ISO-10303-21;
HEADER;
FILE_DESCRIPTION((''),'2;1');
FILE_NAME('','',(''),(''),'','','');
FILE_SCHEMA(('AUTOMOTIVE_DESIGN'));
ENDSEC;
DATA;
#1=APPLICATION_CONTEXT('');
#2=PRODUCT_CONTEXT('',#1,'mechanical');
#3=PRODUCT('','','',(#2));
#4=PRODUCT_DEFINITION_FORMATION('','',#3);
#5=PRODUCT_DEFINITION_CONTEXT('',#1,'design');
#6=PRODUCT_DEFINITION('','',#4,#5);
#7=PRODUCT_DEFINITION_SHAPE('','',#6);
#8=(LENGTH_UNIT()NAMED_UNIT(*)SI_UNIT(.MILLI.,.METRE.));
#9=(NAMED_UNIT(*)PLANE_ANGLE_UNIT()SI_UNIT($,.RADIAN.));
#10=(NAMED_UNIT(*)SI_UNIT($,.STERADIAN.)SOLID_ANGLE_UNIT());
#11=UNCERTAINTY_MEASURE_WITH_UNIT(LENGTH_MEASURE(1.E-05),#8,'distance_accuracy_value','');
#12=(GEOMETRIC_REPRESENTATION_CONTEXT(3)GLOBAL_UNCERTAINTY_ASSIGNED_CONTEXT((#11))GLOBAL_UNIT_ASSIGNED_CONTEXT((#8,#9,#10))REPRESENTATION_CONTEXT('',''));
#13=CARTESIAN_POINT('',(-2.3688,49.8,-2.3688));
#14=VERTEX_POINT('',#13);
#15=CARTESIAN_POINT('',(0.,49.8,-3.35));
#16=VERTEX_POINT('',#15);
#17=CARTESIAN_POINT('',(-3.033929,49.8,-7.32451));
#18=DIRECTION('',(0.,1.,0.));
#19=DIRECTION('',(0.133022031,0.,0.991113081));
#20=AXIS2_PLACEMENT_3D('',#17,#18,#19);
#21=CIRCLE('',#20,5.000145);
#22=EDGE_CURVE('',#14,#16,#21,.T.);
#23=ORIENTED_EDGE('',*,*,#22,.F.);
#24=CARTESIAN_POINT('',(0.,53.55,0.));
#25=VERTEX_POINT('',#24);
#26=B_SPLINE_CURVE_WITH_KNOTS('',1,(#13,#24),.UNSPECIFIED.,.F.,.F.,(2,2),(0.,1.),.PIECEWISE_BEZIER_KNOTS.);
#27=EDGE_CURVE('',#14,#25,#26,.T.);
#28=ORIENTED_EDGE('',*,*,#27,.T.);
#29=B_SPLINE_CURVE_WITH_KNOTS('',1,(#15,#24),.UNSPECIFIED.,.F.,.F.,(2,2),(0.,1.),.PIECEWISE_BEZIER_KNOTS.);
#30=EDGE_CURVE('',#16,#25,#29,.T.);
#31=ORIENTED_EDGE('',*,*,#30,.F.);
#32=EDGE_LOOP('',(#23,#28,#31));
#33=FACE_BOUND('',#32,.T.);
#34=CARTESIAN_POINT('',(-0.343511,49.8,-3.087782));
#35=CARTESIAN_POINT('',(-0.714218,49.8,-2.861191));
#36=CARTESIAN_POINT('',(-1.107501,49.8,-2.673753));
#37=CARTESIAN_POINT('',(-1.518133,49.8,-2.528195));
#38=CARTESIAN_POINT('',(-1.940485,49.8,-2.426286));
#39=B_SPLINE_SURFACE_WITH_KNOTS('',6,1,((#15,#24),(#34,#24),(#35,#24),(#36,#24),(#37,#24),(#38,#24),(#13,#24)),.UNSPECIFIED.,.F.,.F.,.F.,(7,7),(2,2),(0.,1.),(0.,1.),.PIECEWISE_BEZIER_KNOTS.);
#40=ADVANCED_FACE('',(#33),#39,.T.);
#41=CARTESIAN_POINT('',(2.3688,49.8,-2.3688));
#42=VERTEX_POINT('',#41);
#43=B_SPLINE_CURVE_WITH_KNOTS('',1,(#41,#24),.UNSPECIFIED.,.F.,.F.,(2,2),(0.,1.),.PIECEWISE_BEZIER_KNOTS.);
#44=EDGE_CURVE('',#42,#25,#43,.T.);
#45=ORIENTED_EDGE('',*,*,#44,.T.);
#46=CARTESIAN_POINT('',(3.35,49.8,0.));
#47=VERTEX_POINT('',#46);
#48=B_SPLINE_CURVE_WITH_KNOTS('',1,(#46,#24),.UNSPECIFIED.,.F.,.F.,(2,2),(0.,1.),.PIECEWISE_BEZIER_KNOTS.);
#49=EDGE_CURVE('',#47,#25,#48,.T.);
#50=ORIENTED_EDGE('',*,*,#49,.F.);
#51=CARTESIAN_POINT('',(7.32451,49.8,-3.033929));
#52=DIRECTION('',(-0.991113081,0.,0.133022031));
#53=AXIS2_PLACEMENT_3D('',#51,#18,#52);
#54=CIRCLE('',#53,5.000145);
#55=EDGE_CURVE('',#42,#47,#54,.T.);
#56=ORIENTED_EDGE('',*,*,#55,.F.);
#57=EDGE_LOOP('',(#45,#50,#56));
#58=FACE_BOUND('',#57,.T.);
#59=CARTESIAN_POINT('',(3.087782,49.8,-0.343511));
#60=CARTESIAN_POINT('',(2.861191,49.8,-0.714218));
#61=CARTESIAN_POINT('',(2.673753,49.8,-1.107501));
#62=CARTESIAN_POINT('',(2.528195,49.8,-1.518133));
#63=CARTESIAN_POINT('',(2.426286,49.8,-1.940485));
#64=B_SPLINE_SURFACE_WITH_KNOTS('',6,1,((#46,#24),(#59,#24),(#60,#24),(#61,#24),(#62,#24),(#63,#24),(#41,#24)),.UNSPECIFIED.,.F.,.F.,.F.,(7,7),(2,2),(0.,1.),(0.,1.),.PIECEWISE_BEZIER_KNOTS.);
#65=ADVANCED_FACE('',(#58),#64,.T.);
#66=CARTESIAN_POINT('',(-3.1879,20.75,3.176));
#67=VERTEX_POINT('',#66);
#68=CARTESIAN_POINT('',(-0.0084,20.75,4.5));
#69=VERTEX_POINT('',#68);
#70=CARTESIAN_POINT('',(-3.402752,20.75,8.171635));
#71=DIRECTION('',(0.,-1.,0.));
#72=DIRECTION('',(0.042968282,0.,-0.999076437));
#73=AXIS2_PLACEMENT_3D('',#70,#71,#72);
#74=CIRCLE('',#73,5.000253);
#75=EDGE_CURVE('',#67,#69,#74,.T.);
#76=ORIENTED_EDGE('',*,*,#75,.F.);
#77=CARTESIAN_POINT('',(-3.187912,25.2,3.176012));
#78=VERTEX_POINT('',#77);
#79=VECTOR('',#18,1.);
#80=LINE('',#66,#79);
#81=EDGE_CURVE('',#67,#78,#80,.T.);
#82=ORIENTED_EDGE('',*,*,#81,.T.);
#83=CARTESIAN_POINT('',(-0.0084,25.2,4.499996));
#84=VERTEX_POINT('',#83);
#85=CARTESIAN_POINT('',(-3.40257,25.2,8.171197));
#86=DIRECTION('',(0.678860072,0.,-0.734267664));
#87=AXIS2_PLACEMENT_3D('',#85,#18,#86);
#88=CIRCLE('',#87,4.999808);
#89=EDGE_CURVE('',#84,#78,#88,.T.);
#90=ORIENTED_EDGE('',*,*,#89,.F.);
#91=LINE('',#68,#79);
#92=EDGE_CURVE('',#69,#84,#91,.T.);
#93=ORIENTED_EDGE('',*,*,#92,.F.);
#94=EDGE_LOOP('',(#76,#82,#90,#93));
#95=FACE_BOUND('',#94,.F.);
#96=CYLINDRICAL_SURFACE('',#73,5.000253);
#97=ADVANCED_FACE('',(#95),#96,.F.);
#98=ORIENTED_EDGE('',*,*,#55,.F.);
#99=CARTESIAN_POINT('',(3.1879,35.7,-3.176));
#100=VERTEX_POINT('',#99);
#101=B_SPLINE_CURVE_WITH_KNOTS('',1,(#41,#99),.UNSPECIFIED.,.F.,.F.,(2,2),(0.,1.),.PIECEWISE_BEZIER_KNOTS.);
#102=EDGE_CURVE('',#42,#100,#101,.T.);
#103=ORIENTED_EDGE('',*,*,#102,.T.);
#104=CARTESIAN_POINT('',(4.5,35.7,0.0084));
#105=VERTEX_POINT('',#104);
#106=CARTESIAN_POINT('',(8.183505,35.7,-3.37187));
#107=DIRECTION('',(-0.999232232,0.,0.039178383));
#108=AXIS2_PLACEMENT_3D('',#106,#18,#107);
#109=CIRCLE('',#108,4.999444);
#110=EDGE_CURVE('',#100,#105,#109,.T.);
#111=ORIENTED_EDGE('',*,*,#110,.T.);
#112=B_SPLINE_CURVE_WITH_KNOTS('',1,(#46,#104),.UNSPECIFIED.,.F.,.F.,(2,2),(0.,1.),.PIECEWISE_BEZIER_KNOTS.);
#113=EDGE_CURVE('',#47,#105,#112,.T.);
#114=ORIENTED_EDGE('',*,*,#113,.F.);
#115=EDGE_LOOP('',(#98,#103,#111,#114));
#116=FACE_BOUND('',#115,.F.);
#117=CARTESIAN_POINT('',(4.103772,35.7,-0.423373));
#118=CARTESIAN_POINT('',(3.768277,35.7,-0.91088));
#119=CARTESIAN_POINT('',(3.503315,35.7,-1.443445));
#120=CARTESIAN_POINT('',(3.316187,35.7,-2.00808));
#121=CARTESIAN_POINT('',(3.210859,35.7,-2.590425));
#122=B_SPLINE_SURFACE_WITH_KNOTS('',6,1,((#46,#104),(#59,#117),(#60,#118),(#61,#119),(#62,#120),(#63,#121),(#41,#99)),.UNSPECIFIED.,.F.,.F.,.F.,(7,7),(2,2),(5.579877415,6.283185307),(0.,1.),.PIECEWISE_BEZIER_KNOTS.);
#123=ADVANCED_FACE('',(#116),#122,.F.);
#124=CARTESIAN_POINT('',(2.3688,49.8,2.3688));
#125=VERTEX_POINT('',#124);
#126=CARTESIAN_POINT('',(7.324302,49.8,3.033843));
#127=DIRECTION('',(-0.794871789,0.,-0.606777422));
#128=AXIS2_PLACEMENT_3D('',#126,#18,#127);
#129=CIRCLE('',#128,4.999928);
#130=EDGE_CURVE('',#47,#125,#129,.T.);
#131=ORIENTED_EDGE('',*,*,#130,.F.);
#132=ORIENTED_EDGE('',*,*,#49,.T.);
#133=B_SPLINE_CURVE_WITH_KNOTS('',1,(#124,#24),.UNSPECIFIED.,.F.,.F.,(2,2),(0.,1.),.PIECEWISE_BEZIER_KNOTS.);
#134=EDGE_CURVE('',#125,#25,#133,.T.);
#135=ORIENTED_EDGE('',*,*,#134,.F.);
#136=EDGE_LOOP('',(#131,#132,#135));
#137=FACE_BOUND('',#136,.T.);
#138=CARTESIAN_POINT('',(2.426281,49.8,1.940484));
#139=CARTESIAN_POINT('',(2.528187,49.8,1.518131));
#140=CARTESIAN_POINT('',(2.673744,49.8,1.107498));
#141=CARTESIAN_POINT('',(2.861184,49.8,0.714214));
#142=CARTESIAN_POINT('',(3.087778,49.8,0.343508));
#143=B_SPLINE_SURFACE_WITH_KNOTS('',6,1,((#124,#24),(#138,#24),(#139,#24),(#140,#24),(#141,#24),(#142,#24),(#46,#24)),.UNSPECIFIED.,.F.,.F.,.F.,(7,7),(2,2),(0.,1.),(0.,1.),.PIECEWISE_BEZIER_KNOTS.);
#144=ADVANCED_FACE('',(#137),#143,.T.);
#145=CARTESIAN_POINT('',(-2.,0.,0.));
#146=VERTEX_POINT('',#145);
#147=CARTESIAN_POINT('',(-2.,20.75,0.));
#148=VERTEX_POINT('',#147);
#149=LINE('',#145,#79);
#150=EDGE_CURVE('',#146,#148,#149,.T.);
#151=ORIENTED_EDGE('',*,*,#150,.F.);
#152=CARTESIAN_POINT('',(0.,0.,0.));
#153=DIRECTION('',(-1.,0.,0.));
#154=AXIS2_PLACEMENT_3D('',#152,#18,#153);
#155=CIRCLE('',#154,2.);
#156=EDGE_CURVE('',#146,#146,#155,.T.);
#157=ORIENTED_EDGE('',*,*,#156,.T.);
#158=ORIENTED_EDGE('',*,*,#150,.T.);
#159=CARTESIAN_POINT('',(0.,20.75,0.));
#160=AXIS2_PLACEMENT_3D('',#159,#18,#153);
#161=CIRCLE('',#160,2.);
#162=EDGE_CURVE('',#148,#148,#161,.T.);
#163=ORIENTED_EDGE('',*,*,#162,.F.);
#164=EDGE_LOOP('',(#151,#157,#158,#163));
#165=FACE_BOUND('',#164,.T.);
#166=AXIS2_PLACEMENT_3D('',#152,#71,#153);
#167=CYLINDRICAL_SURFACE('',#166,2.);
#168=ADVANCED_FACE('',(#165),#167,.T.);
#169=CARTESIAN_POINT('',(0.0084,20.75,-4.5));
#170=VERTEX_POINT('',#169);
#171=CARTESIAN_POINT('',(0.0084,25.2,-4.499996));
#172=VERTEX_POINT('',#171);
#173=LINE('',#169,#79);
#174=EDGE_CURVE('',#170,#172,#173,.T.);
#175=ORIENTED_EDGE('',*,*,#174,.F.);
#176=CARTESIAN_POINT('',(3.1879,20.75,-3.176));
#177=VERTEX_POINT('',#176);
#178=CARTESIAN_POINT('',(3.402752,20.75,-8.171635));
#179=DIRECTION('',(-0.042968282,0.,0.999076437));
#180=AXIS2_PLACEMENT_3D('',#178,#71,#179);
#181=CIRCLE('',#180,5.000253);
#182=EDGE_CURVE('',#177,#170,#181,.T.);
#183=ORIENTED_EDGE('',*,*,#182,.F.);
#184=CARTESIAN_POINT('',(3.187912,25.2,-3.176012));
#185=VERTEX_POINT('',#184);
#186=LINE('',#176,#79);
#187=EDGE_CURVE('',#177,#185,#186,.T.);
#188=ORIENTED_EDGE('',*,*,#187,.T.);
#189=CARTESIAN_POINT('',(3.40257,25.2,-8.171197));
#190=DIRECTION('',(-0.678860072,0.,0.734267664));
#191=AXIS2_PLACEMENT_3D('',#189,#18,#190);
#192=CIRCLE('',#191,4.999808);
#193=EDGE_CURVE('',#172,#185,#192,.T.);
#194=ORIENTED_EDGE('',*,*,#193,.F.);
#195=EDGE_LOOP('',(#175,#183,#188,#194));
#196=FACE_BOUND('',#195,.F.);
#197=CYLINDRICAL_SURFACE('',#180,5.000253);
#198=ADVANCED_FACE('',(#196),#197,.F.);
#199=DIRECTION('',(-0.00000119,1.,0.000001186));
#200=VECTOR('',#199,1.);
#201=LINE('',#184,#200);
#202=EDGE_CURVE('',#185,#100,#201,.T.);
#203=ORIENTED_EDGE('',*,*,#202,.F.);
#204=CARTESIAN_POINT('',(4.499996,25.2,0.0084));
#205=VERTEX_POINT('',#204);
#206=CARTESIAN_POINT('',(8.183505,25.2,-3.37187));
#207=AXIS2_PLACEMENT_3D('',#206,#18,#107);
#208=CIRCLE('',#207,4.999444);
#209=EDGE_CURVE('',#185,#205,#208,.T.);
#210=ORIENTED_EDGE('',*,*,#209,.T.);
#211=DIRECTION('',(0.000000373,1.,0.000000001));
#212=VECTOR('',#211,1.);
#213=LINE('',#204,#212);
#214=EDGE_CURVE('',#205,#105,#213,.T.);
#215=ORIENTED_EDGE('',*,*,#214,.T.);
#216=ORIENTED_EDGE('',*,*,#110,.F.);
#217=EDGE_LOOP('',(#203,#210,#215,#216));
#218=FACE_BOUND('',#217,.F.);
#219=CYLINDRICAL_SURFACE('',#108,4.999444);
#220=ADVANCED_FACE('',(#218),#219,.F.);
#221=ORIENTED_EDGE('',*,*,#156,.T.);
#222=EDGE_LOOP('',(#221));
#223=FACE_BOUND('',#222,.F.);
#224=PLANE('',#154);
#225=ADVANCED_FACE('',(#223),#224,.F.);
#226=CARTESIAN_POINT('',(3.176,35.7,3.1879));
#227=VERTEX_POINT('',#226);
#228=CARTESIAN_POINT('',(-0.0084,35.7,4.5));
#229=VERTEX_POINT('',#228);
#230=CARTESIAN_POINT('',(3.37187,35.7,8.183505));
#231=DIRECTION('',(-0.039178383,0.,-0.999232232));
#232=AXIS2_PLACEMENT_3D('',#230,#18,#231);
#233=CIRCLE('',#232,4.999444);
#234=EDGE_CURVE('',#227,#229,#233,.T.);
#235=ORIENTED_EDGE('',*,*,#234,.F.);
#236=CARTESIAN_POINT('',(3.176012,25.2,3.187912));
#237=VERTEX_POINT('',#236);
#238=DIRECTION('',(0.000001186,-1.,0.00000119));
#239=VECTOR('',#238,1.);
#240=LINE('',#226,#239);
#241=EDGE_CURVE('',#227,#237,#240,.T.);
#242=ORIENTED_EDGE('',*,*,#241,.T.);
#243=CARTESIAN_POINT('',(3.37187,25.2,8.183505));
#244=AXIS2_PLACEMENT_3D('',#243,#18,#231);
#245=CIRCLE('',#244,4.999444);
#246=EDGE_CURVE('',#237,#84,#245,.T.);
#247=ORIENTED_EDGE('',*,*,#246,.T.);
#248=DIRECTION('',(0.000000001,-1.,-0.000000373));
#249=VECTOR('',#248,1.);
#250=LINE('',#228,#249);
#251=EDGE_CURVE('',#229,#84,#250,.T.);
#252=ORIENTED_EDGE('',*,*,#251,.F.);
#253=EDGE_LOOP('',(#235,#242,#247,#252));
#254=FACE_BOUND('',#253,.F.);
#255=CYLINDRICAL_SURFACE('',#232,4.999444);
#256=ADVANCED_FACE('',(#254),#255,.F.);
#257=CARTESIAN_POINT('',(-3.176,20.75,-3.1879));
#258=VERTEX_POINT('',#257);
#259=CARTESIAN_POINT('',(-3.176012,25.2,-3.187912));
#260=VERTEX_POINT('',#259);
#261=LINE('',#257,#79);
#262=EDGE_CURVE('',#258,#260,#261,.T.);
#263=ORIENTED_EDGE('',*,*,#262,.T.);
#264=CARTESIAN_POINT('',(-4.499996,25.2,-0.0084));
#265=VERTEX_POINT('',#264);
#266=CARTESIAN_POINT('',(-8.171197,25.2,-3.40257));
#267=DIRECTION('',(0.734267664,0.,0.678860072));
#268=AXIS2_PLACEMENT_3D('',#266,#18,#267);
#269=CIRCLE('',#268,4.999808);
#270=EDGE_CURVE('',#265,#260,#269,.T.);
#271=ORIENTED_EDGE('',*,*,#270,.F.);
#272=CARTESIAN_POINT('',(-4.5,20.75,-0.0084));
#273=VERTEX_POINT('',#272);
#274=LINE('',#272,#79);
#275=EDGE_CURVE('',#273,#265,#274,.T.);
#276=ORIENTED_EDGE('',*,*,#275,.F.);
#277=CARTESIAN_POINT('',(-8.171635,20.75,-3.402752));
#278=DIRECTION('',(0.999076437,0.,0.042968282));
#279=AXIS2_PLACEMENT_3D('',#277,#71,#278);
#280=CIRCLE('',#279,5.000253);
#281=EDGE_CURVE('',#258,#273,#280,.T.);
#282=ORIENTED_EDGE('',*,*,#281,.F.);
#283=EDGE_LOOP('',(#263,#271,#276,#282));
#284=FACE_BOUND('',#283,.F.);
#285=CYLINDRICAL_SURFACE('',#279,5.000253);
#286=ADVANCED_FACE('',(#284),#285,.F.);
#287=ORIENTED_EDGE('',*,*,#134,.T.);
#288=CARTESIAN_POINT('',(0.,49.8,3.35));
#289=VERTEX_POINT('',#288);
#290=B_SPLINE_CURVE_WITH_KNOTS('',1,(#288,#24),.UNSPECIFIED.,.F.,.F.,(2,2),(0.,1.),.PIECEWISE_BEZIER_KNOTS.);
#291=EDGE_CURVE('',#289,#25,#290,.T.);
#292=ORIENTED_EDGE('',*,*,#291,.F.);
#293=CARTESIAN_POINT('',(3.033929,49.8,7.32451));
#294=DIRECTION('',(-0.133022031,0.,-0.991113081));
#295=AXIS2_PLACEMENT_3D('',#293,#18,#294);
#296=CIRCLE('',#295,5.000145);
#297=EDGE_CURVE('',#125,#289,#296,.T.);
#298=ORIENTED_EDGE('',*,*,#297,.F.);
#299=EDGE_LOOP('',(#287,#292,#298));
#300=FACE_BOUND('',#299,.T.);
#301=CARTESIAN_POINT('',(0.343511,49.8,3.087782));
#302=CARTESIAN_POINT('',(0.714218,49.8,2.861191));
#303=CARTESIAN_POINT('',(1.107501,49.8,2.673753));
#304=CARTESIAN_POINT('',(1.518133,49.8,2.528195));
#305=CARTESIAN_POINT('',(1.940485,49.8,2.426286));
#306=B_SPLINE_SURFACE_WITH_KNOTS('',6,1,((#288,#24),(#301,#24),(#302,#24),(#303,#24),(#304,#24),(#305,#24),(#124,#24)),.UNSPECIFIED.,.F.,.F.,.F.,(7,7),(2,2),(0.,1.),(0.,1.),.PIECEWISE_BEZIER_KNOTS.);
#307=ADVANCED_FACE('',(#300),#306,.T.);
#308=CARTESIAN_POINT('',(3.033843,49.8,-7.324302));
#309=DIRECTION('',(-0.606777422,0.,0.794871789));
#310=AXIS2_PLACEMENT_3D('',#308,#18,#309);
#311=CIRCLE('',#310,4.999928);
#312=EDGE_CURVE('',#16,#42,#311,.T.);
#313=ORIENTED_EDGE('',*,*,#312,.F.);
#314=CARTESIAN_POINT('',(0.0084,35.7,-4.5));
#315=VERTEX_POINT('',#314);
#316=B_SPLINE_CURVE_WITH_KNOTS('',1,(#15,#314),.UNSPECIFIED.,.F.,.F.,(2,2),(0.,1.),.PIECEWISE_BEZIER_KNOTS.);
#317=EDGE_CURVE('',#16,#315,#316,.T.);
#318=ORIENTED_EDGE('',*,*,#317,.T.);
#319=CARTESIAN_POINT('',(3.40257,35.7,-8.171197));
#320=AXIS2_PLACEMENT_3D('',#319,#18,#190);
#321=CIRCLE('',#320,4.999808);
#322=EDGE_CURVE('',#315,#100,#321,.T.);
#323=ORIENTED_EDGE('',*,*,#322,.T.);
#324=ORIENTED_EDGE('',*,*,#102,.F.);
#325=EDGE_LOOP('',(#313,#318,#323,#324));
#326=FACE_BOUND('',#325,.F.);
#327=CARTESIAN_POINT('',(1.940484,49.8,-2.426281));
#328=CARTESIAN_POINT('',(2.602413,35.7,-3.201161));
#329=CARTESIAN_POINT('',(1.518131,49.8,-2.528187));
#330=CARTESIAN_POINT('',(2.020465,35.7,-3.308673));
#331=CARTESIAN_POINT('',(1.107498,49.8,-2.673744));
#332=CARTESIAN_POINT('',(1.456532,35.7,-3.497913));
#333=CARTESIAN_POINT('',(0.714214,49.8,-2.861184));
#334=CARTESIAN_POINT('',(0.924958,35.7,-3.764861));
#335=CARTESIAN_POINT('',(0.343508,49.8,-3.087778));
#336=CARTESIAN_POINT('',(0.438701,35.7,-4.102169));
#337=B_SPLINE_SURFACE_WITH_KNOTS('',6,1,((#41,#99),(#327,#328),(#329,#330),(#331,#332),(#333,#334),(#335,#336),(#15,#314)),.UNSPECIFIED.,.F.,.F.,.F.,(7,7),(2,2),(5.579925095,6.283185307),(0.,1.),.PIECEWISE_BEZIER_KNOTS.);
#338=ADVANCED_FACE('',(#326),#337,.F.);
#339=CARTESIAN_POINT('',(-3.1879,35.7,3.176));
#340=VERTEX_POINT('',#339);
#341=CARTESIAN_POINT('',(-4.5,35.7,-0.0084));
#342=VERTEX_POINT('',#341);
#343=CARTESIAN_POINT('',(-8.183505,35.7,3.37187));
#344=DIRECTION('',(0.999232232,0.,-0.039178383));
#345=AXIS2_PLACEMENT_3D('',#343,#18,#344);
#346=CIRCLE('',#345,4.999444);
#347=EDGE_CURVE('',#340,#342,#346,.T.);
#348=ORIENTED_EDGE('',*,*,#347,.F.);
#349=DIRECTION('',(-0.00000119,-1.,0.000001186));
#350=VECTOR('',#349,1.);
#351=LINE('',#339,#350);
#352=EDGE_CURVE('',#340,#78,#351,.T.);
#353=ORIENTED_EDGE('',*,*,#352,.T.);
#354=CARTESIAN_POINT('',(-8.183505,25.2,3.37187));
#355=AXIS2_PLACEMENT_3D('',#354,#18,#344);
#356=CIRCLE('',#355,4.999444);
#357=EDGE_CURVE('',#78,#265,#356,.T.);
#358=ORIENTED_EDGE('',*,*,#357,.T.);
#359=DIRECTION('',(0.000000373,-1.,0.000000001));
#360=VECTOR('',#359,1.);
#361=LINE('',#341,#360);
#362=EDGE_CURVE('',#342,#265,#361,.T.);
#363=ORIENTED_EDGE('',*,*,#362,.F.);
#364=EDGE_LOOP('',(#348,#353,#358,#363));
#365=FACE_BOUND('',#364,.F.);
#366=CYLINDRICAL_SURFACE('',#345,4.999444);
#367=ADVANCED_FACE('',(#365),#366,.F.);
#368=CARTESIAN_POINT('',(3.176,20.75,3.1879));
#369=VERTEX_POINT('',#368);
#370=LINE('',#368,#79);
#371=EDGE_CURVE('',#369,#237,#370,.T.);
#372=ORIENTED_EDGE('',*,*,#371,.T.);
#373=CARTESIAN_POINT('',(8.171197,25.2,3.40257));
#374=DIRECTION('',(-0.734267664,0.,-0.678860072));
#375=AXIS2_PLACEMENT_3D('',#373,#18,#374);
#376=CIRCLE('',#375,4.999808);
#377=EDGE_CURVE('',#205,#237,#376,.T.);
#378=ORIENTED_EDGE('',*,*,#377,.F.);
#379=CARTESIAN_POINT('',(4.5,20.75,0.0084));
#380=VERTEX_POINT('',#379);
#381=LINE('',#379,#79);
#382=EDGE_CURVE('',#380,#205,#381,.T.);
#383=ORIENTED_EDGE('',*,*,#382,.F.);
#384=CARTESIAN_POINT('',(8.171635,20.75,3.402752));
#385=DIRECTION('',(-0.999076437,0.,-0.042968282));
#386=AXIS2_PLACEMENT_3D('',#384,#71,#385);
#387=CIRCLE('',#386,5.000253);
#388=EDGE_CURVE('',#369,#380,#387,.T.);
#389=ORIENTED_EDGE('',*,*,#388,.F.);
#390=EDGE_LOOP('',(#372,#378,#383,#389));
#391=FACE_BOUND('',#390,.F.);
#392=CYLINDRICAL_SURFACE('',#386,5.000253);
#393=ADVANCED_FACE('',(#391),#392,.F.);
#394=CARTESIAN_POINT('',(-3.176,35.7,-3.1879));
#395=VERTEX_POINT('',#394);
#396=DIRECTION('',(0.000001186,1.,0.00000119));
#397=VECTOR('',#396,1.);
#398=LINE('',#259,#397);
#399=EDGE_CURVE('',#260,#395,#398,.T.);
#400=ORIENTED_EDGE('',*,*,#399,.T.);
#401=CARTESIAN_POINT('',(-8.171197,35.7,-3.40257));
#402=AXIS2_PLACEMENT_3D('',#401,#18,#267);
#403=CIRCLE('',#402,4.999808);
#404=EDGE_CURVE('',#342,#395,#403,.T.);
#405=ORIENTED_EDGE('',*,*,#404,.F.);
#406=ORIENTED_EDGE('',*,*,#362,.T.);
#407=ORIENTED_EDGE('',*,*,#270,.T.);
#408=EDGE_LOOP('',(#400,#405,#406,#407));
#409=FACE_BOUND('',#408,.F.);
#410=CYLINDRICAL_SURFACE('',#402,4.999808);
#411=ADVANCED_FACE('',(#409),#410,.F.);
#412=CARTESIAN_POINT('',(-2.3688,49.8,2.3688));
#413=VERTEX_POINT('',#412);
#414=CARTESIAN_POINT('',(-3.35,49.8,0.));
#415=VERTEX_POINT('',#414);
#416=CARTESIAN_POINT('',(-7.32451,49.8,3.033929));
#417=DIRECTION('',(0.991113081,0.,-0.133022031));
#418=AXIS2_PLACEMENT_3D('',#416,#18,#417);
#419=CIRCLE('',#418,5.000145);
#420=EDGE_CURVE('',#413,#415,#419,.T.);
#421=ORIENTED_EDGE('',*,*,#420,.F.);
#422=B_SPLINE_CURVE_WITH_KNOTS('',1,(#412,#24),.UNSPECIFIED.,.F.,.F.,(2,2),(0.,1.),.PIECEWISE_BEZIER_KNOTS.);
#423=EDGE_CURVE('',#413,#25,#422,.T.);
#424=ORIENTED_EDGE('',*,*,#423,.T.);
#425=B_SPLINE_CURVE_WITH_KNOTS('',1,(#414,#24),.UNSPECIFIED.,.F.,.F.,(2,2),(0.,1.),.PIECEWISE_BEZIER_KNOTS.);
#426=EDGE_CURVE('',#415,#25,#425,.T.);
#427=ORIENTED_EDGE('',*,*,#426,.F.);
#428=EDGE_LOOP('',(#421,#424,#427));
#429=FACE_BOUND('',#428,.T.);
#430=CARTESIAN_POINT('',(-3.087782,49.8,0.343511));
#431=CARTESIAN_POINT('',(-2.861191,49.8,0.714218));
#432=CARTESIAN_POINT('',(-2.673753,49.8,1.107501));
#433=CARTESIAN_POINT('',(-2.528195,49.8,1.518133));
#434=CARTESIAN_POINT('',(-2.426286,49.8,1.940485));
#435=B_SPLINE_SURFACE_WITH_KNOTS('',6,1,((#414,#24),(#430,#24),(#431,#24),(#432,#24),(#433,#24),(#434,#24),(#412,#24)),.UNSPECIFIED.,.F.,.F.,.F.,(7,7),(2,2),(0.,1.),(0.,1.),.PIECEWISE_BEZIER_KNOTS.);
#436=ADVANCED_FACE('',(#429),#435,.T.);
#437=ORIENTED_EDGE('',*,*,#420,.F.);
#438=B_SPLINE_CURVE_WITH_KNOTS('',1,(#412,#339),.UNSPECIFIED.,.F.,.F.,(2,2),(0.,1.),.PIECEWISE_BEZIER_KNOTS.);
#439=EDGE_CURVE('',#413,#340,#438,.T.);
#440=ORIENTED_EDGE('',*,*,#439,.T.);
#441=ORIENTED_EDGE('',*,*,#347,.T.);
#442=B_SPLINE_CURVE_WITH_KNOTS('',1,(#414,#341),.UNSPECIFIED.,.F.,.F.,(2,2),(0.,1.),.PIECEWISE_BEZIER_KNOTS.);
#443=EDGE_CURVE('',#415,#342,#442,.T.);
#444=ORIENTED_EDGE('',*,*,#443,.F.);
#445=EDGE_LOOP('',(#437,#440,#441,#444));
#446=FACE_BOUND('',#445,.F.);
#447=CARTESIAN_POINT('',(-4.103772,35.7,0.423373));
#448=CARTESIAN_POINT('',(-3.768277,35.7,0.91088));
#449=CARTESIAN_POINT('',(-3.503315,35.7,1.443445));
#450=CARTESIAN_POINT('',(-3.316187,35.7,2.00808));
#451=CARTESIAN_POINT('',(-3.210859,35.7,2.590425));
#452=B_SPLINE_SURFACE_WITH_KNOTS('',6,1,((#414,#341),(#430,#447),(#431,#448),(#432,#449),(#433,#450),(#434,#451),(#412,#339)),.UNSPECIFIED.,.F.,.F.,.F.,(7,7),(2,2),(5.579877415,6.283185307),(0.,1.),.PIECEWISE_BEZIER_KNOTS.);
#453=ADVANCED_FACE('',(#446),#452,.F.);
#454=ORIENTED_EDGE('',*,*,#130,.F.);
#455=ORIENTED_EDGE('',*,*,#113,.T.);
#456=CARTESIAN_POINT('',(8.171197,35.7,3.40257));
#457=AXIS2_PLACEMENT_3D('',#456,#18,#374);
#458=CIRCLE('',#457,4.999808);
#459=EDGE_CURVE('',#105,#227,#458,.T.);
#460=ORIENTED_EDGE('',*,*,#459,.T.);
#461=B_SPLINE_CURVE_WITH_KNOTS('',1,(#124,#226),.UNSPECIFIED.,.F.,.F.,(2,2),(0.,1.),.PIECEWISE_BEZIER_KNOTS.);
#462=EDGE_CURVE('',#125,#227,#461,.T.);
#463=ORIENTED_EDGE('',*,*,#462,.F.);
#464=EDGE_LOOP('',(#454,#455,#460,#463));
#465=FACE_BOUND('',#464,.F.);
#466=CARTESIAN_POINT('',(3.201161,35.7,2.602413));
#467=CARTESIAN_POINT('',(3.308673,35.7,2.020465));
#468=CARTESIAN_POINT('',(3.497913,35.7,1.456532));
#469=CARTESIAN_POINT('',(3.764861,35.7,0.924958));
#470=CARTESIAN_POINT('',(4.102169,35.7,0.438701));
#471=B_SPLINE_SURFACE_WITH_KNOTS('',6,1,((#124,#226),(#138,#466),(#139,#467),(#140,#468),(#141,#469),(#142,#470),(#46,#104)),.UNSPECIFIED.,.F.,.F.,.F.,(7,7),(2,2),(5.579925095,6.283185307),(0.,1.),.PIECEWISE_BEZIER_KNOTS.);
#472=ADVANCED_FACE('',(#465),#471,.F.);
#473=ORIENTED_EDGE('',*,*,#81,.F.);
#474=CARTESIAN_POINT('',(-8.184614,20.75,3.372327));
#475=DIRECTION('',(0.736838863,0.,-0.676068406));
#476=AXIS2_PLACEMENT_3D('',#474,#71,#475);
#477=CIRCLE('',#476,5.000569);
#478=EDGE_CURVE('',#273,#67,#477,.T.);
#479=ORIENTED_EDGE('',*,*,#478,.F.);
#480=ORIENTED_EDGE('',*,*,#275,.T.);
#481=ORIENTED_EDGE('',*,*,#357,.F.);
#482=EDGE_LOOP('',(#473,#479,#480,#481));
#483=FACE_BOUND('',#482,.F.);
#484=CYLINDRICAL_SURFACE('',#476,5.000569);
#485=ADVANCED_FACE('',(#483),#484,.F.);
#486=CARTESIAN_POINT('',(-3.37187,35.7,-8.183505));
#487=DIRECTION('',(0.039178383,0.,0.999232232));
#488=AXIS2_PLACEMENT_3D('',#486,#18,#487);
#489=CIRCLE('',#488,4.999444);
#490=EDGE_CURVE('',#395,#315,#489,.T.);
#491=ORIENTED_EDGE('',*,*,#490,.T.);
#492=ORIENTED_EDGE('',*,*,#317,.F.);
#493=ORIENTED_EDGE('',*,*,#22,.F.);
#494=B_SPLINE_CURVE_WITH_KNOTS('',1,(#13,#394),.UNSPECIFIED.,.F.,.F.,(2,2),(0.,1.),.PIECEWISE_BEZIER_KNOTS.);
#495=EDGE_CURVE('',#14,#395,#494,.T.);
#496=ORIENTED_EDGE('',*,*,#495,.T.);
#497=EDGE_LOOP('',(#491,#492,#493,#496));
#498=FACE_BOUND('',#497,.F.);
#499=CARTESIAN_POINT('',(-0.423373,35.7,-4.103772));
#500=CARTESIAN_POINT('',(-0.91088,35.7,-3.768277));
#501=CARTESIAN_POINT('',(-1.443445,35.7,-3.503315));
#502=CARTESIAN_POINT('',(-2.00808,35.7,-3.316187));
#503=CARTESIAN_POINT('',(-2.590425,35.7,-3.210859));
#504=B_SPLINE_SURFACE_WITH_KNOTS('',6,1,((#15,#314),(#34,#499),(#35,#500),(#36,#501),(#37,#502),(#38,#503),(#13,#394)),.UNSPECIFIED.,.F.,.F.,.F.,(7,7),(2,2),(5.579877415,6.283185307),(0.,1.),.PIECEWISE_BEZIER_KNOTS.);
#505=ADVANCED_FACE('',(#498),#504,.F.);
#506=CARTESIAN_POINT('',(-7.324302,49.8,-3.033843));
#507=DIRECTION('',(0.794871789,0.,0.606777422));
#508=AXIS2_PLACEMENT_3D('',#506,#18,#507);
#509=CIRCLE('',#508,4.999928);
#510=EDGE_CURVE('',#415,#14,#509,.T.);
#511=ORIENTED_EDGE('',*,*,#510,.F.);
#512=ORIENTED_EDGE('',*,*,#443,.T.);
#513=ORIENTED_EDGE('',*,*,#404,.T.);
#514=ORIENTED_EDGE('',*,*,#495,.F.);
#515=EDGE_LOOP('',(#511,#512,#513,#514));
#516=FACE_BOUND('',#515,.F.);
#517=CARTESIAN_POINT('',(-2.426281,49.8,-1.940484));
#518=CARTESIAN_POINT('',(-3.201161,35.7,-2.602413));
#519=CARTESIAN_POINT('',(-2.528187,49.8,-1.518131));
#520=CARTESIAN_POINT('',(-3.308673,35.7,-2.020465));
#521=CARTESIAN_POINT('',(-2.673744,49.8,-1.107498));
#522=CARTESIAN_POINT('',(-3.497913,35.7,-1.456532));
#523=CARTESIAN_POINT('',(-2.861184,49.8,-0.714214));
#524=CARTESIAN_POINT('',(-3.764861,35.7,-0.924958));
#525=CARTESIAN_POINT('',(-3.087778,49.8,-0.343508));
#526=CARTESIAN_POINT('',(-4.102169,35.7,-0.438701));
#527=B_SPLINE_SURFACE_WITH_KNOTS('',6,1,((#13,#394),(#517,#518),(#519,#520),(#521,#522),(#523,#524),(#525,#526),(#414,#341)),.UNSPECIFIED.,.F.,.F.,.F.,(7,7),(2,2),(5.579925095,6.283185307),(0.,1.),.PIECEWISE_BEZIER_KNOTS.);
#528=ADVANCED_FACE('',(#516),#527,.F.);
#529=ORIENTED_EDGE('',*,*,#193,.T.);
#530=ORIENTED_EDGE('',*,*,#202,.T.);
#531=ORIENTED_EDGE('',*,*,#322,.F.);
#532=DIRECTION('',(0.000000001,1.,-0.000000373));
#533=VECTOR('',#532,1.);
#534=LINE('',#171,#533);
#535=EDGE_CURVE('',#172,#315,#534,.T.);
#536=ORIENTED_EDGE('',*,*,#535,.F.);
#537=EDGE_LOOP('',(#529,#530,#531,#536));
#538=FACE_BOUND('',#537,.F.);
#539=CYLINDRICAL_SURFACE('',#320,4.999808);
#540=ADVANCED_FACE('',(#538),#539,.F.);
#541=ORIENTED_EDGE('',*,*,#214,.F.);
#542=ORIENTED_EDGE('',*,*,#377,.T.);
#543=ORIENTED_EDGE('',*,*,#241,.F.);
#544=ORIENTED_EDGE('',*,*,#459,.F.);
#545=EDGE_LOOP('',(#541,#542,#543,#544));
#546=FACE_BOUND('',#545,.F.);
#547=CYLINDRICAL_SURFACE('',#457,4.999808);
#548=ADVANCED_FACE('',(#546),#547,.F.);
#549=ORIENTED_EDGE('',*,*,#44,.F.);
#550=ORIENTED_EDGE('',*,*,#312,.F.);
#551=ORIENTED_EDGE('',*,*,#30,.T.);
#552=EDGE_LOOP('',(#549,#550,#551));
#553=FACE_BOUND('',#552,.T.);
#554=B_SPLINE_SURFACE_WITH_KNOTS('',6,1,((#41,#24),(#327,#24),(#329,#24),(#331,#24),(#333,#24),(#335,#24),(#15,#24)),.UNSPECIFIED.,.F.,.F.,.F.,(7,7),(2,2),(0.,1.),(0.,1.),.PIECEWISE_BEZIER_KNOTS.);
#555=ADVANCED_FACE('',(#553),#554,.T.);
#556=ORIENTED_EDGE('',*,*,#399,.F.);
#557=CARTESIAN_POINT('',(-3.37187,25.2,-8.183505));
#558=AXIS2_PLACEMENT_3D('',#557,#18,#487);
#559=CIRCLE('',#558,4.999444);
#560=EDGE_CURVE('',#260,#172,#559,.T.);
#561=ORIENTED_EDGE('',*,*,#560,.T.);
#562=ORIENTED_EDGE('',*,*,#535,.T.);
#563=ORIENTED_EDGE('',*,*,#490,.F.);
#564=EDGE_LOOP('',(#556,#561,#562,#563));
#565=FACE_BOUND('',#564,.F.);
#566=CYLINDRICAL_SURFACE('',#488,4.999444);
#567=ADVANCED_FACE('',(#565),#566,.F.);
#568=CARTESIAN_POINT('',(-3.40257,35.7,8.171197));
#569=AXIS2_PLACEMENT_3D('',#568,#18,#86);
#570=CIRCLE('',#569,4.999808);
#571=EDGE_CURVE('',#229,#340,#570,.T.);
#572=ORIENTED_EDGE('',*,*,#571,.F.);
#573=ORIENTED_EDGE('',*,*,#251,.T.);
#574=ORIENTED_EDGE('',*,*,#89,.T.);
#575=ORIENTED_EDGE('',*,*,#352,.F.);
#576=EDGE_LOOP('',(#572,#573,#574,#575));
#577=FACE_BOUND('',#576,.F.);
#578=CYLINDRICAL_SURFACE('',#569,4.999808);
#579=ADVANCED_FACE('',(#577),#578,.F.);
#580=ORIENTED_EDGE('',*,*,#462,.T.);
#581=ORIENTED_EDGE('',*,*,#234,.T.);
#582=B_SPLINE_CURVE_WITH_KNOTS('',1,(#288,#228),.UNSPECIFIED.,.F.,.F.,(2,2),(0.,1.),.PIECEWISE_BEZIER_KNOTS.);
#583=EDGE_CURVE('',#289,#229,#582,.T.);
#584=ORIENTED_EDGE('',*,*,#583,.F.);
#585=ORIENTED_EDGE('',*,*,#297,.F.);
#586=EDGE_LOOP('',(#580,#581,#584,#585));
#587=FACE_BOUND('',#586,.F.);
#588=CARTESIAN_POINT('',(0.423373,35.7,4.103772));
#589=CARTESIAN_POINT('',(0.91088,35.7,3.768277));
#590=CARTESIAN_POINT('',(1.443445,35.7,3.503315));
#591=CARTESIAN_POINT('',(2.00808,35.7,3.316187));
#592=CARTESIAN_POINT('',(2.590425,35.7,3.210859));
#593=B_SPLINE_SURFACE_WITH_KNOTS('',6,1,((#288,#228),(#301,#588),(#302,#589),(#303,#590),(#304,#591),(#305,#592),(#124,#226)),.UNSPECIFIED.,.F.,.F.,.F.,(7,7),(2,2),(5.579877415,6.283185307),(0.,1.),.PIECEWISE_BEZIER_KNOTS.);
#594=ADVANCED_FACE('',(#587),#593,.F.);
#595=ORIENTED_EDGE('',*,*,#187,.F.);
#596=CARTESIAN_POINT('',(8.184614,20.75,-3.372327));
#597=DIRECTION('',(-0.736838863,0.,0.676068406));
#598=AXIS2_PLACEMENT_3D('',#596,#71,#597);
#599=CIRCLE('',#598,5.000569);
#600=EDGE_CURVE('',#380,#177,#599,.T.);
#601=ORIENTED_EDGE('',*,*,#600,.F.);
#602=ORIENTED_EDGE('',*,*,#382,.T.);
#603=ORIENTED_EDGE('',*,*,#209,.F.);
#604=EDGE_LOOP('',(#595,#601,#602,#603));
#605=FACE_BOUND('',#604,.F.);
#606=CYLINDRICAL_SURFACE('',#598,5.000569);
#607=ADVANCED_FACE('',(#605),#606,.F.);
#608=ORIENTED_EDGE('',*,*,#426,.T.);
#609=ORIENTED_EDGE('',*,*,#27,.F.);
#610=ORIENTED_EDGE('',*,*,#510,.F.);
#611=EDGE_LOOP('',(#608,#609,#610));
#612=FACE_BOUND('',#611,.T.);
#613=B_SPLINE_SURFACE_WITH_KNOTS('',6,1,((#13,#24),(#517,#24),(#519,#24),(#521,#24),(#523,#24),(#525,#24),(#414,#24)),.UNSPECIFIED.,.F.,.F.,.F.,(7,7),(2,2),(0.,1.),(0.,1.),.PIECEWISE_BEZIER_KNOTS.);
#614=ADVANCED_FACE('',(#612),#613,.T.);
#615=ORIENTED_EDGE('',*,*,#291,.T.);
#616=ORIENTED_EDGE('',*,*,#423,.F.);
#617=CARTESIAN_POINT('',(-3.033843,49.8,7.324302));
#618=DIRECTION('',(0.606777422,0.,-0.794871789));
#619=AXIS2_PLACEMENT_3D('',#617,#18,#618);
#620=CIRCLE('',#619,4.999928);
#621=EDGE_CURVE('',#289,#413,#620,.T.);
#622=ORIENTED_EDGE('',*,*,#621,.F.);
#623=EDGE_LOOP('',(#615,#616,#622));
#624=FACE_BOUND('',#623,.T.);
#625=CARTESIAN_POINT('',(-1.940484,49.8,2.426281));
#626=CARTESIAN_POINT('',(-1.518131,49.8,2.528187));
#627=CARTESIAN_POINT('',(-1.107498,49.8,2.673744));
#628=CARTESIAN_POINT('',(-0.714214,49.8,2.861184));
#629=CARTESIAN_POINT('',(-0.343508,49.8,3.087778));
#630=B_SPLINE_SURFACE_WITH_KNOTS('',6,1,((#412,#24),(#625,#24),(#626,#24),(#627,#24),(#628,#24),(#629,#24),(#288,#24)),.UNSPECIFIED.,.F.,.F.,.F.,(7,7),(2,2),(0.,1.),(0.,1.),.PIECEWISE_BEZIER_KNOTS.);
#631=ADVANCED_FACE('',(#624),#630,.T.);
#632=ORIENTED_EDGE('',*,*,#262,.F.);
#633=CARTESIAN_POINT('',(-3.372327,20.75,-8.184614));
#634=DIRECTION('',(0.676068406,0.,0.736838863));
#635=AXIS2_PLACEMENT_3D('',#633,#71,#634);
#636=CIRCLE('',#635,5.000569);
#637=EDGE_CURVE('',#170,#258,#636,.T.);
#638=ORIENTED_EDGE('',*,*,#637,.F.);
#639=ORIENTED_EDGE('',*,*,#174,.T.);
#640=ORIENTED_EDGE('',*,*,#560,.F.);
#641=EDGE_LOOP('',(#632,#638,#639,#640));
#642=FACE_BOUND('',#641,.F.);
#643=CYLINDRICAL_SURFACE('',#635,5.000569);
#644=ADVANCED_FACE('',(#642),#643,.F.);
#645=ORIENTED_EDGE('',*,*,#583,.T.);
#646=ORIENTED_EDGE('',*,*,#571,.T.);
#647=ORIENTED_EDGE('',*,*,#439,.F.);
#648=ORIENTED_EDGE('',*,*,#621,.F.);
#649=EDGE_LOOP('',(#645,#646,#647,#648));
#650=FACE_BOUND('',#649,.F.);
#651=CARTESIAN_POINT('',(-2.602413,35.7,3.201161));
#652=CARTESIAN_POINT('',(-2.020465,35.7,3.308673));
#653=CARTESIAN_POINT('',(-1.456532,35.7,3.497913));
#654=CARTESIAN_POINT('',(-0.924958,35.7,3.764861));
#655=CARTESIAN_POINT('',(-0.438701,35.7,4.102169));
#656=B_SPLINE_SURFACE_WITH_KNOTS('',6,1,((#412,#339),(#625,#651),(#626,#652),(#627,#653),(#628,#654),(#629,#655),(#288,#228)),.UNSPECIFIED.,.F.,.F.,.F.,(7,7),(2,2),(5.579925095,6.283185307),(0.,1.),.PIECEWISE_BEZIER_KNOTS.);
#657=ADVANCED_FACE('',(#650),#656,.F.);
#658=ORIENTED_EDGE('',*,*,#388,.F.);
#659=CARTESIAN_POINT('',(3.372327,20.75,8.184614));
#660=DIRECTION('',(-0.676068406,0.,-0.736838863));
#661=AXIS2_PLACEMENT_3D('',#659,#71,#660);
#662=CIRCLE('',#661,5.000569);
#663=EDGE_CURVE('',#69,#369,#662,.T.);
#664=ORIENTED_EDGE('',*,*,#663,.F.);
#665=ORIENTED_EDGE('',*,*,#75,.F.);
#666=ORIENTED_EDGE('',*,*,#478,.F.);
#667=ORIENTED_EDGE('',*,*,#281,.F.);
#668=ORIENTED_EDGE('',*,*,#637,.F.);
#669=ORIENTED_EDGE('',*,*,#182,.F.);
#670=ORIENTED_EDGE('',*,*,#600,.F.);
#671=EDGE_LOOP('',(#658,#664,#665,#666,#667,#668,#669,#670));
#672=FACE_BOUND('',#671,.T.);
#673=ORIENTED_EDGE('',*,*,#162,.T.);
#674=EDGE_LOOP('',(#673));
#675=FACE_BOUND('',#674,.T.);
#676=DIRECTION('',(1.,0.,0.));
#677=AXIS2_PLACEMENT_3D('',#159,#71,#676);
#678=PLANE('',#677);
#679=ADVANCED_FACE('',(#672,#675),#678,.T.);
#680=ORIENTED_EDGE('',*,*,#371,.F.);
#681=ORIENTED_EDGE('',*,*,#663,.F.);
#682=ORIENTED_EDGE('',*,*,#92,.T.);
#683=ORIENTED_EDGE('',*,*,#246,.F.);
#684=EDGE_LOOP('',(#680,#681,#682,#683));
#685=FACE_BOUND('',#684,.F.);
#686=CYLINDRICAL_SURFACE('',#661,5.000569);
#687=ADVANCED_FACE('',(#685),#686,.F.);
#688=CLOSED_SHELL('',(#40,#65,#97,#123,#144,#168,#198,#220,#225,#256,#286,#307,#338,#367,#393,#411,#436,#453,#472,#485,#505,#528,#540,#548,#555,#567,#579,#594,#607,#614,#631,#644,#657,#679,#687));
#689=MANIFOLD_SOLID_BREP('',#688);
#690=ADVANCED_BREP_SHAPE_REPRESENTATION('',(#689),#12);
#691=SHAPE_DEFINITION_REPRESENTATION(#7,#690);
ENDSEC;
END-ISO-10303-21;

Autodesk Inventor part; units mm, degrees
sketch "Sketch1" plane through (0, 0, 0) normal (1, 0, 0) x (0, 1, 0)
  point P0 (0, 0)
sketch "Sketch2" plane through (0, 0, 0) normal (0, 1, 0) x (-1, 0, 0)
  circle A0 centre (0, 0) radius 2
  dimension "d0" = 4
extrude "Extrusion1" add sketch "Sketch2" along normal blind 25.2
sketch "Sketch3" plane through (0, 25.2, 0) normal (0, 1, 0) x (1, 0, 0)
  circle A0 centre (0, 0) radius 2 projected
  circle A1 centre (0, 0) radius 4.5
  dimension "d3" = 9
extrude "Extrusion2" add sketch "Sketch3" along normal blind 2 contours A0 | A1
sketch "Sketch4" plane through (0, 27.2, 0) normal (0, 1, 0) x (1, 0, 0)
  circle A0 centre (0, 0) radius 4.5 projected
extrude "Extrusion3" add sketch "Sketch4" along normal blind 8.5
sketch "Sketch5" plane through (0, 35.7, 0) normal (0, 1, 0) x (1, 0, 0)
  point P0 (0, 0)
ref_plane "Work Plane1" through (0, 49.8, 0) normal (0, 1, 0) x (1, 0, 0)
sketch "Sketch6" plane through (0, 49.8, 0) normal (0, 1, 0) x (1, 0, 0)
  arc A0 (2.3688, -2.3688) -> (0, -3.35) centre (3.0339, -7.3244) ccw
  arc A1 (0, -3.35) -> (-2.3688, -2.3688) centre (-3.0339, -7.3244) ccw
  arc A2 (3.35, 0) -> (2.3688, -2.3688) centre (7.3244, -3.0339) ccw
  arc A3 (2.3688, 2.3688) -> (3.35, 0) centre (7.3244, 3.0339) ccw
  arc A4 (-3.35, 0) -> (-2.3688, 2.3688) centre (-7.3244, 3.0339) ccw
  arc A5 (-2.3688, -2.3688) -> (-3.35, 0) centre (-7.3244, -3.0339) ccw
  arc A6 (-2.3688, 2.3688) -> (0, 3.35) centre (-3.0339, 7.3244) ccw
  arc A7 (0, 3.35) -> (2.3688, 2.3688) centre (3.0339, 7.3244) ccw
  point P0 (0, 0)
  dimension "d25" = 5
sketch "Sketch7" plane through (0, 35.7, 0) normal (0, 1, 0) x (1, 0, 0)
  circle A0 centre (0, 0) radius 4.5 projected
  circle A1 centre (0, 0) radius 4.5 projected
  arc A2 (-3.1879, -3.176) -> (-4.5, 0.0084) centre (-8.1841, -3.372) ccw
  arc A3 (-4.5, 0.0084) -> (-3.176, 3.1879) centre (-8.1714, 3.4027) ccw
  arc A4 (4.5, -0.0084) -> (3.176, -3.1879) centre (8.1714, -3.4027) ccw
  arc A5 (3.1879, 3.176) -> (4.5, -0.0084) centre (8.1841, 3.372) ccw
  arc A6 (-0.0084, -4.5) -> (-3.1879, -3.176) centre (-3.4027, -8.1714) ccw
  arc A7 (3.176, -3.1879) -> (-0.0084, -4.5) centre (3.372, -8.1841) ccw
  arc A8 (0.0084, 4.5) -> (3.1879, 3.176) centre (3.4027, 8.1714) ccw
  arc A9 (-3.176, 3.1879) -> (0.0084, 4.5) centre (-3.372, 8.1841) ccw
  circle A10 centre (0, 0) radius 4.5
extrude "Extrusion4" cut sketch "Sketch7" against normal blind 8.5 contours A0 A5 | A8 A0 | A0 A4 | A9 A0 | A0 A7 | A3 A0 | A0 A6 | A2 A0
ref_plane "Work Plane2" through (0, 49.8, 0) normal (0, 1, 0) x (1, 0, 0)
loft "Loft2" add profiles "Sketch6" section 2 edges at (-1.4806, 35.7, 3.5556) (1.4672, 35.7, 3.5611) (3.5556, 35.7, 1.4806) (3.5611, 35.7, -1.4672) (1.4806, 35.7, -3.5556) (-1.4672, 35.7, -3.5611) (-3.5556, 35.7, -1.4806) (-3.5611, 35.7, 1.4672)
sketch "Sketch10" plane through (0, 27.2, 0) normal (0, 1, 0) x (1, 0, 0)
  arc A0 (3.176, -3.1879) -> (-0.0084, -4.5) centre (3.372, -8.1841) ccw projected
  arc A1 (-0.0084, -4.5) -> (3.176, -3.1879) centre (0, 0) ccw projected
  arc A2 (-0.0084, -4.5) -> (-3.1879, -3.176) centre (-3.4027, -8.1714) ccw projected
  arc A3 (-0.0084, -4.5) -> (-3.1879, -3.176) centre (-3.4027, -8.1714) ccw projected
  arc A4 (-3.1879, -3.176) -> (-0.0084, -4.5) centre (0, 0) ccw projected
  arc A5 (-3.1879, -3.176) -> (-4.5, 0.0084) centre (-8.1841, -3.372) ccw projected
  arc A6 (-4.5, 0.0084) -> (-3.1879, -3.176) centre (0, 0) ccw projected
  arc A7 (-4.5, 0.0084) -> (-3.176, 3.1879) centre (-8.1714, 3.4027) ccw projected
  arc A8 (-3.176, 3.1879) -> (-4.5, 0.0084) centre (0, 0) ccw projected
  arc A9 (-3.176, 3.1879) -> (0.0084, 4.5) centre (-3.372, 8.1841) ccw projected
  arc A10 (-3.176, 3.1879) -> (0.0084, 4.5) centre (-3.372, 8.1841) ccw projected
  arc A11 (0.0084, 4.5) -> (-3.176, 3.1879) centre (0, 0) ccw projected
  arc A12 (0.0084, 4.5) -> (3.1879, 3.176) centre (3.4027, 8.1714) ccw projected
  arc A13 (3.1879, 3.176) -> (0.0084, 4.5) centre (0, 0) ccw projected
  arc A14 (3.1879, 3.176) -> (4.5, -0.0084) centre (8.1841, 3.372) ccw projected
  arc A15 (4.5, -0.0084) -> (3.1879, 3.176) centre (0, 0) ccw projected
  arc A16 (4.5, -0.0084) -> (3.176, -3.1879) centre (8.1714, -3.4027) ccw projected
  arc A17 (3.176, -3.1879) -> (4.5, -0.0084) centre (0, 0) ccw projected
extrude "Extrusion5" cut sketch "Sketch10" against normal blind 10 contours A1 A0 | A16 A17 | A4 A2 | A14 A15 | A6 A5 | A12 A13 | A8 A7 | A9 A11
sketch "Sketch11" plane through (0, 25.2, 0) normal (0, -1, 0) x (1, 0, 0)
  point P0 (0, 0)
ref_plane "Work Plane3" through (0, 20.75, 0) normal (0, -1, 0) x (1, 0, 0)
sketch "Sketch12" plane through (0, 20.75, 0) normal (0, -1, 0) x (1, 0, 0)
  circle A0 centre (0, 0) radius 2 projected
  circle A1 centre (0, 0) radius 3.5
  dimension "d33" = 7
extrude "Extrusion6" add sketch "Sketch12" against normal blind 1
fillet "Fillet1" radius 0.5 1 edges at (-3.5, 21.75, 0)
sketch "Sketch13" plane through (0, 20.75, 0) normal (0, -1, 0) x (1, 0, 0)
  arc A0 (3.176, 3.1879) -> (4.5, 0.0084) centre (8.1714, 3.4027) ccw projected
  arc A1 (-0.0084, 4.5) -> (3.176, 3.1879) centre (3.372, 8.1841) ccw projected
  arc A2 (-3.1879, 3.176) -> (-0.0084, 4.5) centre (-3.4027, 8.1714) ccw projected
  arc A3 (-4.5, -0.0084) -> (-3.1879, 3.176) centre (-8.1841, 3.372) ccw projected
  arc A4 (-3.176, -3.1879) -> (-4.5, -0.0084) centre (-8.1714, -3.4027) ccw projected
  arc A5 (0.0084, -4.5) -> (-3.176, -3.1879) centre (-3.372, -8.1841) ccw projected
  arc A6 (3.1879, -3.176) -> (0.0084, -4.5) centre (3.4027, -8.1714) ccw projected
  arc A7 (4.5, 0.0084) -> (3.1879, -3.176) centre (8.1841, -3.372) ccw projected
  circle A8 centre (0, 0) radius 2 projected
extrude "Extrusion7" add sketch "Sketch13" against normal blind 10
ref_plane "Work Plane4" through (3.0339, 53.55, 7.3244) normal (0, 1, 0) x (0.9238795, 0, -0.3826834)
sketch "Sketch16" plane through (3.0339, 53.55, 7.3244) normal (0, 1, 0) x (0.9238795, 0, -0.3826834)
  arc A0 (1.282, 4.8329) -> (-1.282, 4.8329) centre (0, 0) ccw projected
  arc A1 (3.095, 6.6459) -> (1.282, 4.8329) centre (5.6058, 2.322) ccw projected
  arc A2 (3.095, 9.2098) -> (3.095, 6.6459) centre (7.9279, 7.9279) ccw projected
  arc A3 (1.282, 11.0228) -> (3.095, 9.2098) centre (5.6058, 13.5337) ccw projected
  arc A4 (-1.282, 11.0228) -> (1.282, 11.0228) centre (0, 15.8557) ccw projected
  arc A5 (-3.095, 9.2098) -> (-1.282, 11.0228) centre (-5.6058, 13.5337) ccw projected
  arc A6 (-3.095, 6.6459) -> (-3.095, 9.2098) centre (-7.9279, 7.9279) ccw projected
  arc A7 (-1.282, 4.8329) -> (-3.095, 6.6459) centre (-5.6058, 2.322) ccw projected
  point P0 (0, 7.9279)
  point P1 (0, 7.9279)
loft "Loft4" add section 1 edges at (1.1204, 49.8, 2.705) (2.705, 49.8, 1.1204) (2.705, 49.8, -1.1204) (1.1204, 49.8, -2.705) (-1.1204, 49.8, -2.705) (-2.705, 49.8, -1.1204) (-2.705, 49.8, 1.1204) (-1.1204, 49.8, 2.705) section 2 point at (0, 53.55, 0)
properties part number "mixer" material "PBT Plastic"
